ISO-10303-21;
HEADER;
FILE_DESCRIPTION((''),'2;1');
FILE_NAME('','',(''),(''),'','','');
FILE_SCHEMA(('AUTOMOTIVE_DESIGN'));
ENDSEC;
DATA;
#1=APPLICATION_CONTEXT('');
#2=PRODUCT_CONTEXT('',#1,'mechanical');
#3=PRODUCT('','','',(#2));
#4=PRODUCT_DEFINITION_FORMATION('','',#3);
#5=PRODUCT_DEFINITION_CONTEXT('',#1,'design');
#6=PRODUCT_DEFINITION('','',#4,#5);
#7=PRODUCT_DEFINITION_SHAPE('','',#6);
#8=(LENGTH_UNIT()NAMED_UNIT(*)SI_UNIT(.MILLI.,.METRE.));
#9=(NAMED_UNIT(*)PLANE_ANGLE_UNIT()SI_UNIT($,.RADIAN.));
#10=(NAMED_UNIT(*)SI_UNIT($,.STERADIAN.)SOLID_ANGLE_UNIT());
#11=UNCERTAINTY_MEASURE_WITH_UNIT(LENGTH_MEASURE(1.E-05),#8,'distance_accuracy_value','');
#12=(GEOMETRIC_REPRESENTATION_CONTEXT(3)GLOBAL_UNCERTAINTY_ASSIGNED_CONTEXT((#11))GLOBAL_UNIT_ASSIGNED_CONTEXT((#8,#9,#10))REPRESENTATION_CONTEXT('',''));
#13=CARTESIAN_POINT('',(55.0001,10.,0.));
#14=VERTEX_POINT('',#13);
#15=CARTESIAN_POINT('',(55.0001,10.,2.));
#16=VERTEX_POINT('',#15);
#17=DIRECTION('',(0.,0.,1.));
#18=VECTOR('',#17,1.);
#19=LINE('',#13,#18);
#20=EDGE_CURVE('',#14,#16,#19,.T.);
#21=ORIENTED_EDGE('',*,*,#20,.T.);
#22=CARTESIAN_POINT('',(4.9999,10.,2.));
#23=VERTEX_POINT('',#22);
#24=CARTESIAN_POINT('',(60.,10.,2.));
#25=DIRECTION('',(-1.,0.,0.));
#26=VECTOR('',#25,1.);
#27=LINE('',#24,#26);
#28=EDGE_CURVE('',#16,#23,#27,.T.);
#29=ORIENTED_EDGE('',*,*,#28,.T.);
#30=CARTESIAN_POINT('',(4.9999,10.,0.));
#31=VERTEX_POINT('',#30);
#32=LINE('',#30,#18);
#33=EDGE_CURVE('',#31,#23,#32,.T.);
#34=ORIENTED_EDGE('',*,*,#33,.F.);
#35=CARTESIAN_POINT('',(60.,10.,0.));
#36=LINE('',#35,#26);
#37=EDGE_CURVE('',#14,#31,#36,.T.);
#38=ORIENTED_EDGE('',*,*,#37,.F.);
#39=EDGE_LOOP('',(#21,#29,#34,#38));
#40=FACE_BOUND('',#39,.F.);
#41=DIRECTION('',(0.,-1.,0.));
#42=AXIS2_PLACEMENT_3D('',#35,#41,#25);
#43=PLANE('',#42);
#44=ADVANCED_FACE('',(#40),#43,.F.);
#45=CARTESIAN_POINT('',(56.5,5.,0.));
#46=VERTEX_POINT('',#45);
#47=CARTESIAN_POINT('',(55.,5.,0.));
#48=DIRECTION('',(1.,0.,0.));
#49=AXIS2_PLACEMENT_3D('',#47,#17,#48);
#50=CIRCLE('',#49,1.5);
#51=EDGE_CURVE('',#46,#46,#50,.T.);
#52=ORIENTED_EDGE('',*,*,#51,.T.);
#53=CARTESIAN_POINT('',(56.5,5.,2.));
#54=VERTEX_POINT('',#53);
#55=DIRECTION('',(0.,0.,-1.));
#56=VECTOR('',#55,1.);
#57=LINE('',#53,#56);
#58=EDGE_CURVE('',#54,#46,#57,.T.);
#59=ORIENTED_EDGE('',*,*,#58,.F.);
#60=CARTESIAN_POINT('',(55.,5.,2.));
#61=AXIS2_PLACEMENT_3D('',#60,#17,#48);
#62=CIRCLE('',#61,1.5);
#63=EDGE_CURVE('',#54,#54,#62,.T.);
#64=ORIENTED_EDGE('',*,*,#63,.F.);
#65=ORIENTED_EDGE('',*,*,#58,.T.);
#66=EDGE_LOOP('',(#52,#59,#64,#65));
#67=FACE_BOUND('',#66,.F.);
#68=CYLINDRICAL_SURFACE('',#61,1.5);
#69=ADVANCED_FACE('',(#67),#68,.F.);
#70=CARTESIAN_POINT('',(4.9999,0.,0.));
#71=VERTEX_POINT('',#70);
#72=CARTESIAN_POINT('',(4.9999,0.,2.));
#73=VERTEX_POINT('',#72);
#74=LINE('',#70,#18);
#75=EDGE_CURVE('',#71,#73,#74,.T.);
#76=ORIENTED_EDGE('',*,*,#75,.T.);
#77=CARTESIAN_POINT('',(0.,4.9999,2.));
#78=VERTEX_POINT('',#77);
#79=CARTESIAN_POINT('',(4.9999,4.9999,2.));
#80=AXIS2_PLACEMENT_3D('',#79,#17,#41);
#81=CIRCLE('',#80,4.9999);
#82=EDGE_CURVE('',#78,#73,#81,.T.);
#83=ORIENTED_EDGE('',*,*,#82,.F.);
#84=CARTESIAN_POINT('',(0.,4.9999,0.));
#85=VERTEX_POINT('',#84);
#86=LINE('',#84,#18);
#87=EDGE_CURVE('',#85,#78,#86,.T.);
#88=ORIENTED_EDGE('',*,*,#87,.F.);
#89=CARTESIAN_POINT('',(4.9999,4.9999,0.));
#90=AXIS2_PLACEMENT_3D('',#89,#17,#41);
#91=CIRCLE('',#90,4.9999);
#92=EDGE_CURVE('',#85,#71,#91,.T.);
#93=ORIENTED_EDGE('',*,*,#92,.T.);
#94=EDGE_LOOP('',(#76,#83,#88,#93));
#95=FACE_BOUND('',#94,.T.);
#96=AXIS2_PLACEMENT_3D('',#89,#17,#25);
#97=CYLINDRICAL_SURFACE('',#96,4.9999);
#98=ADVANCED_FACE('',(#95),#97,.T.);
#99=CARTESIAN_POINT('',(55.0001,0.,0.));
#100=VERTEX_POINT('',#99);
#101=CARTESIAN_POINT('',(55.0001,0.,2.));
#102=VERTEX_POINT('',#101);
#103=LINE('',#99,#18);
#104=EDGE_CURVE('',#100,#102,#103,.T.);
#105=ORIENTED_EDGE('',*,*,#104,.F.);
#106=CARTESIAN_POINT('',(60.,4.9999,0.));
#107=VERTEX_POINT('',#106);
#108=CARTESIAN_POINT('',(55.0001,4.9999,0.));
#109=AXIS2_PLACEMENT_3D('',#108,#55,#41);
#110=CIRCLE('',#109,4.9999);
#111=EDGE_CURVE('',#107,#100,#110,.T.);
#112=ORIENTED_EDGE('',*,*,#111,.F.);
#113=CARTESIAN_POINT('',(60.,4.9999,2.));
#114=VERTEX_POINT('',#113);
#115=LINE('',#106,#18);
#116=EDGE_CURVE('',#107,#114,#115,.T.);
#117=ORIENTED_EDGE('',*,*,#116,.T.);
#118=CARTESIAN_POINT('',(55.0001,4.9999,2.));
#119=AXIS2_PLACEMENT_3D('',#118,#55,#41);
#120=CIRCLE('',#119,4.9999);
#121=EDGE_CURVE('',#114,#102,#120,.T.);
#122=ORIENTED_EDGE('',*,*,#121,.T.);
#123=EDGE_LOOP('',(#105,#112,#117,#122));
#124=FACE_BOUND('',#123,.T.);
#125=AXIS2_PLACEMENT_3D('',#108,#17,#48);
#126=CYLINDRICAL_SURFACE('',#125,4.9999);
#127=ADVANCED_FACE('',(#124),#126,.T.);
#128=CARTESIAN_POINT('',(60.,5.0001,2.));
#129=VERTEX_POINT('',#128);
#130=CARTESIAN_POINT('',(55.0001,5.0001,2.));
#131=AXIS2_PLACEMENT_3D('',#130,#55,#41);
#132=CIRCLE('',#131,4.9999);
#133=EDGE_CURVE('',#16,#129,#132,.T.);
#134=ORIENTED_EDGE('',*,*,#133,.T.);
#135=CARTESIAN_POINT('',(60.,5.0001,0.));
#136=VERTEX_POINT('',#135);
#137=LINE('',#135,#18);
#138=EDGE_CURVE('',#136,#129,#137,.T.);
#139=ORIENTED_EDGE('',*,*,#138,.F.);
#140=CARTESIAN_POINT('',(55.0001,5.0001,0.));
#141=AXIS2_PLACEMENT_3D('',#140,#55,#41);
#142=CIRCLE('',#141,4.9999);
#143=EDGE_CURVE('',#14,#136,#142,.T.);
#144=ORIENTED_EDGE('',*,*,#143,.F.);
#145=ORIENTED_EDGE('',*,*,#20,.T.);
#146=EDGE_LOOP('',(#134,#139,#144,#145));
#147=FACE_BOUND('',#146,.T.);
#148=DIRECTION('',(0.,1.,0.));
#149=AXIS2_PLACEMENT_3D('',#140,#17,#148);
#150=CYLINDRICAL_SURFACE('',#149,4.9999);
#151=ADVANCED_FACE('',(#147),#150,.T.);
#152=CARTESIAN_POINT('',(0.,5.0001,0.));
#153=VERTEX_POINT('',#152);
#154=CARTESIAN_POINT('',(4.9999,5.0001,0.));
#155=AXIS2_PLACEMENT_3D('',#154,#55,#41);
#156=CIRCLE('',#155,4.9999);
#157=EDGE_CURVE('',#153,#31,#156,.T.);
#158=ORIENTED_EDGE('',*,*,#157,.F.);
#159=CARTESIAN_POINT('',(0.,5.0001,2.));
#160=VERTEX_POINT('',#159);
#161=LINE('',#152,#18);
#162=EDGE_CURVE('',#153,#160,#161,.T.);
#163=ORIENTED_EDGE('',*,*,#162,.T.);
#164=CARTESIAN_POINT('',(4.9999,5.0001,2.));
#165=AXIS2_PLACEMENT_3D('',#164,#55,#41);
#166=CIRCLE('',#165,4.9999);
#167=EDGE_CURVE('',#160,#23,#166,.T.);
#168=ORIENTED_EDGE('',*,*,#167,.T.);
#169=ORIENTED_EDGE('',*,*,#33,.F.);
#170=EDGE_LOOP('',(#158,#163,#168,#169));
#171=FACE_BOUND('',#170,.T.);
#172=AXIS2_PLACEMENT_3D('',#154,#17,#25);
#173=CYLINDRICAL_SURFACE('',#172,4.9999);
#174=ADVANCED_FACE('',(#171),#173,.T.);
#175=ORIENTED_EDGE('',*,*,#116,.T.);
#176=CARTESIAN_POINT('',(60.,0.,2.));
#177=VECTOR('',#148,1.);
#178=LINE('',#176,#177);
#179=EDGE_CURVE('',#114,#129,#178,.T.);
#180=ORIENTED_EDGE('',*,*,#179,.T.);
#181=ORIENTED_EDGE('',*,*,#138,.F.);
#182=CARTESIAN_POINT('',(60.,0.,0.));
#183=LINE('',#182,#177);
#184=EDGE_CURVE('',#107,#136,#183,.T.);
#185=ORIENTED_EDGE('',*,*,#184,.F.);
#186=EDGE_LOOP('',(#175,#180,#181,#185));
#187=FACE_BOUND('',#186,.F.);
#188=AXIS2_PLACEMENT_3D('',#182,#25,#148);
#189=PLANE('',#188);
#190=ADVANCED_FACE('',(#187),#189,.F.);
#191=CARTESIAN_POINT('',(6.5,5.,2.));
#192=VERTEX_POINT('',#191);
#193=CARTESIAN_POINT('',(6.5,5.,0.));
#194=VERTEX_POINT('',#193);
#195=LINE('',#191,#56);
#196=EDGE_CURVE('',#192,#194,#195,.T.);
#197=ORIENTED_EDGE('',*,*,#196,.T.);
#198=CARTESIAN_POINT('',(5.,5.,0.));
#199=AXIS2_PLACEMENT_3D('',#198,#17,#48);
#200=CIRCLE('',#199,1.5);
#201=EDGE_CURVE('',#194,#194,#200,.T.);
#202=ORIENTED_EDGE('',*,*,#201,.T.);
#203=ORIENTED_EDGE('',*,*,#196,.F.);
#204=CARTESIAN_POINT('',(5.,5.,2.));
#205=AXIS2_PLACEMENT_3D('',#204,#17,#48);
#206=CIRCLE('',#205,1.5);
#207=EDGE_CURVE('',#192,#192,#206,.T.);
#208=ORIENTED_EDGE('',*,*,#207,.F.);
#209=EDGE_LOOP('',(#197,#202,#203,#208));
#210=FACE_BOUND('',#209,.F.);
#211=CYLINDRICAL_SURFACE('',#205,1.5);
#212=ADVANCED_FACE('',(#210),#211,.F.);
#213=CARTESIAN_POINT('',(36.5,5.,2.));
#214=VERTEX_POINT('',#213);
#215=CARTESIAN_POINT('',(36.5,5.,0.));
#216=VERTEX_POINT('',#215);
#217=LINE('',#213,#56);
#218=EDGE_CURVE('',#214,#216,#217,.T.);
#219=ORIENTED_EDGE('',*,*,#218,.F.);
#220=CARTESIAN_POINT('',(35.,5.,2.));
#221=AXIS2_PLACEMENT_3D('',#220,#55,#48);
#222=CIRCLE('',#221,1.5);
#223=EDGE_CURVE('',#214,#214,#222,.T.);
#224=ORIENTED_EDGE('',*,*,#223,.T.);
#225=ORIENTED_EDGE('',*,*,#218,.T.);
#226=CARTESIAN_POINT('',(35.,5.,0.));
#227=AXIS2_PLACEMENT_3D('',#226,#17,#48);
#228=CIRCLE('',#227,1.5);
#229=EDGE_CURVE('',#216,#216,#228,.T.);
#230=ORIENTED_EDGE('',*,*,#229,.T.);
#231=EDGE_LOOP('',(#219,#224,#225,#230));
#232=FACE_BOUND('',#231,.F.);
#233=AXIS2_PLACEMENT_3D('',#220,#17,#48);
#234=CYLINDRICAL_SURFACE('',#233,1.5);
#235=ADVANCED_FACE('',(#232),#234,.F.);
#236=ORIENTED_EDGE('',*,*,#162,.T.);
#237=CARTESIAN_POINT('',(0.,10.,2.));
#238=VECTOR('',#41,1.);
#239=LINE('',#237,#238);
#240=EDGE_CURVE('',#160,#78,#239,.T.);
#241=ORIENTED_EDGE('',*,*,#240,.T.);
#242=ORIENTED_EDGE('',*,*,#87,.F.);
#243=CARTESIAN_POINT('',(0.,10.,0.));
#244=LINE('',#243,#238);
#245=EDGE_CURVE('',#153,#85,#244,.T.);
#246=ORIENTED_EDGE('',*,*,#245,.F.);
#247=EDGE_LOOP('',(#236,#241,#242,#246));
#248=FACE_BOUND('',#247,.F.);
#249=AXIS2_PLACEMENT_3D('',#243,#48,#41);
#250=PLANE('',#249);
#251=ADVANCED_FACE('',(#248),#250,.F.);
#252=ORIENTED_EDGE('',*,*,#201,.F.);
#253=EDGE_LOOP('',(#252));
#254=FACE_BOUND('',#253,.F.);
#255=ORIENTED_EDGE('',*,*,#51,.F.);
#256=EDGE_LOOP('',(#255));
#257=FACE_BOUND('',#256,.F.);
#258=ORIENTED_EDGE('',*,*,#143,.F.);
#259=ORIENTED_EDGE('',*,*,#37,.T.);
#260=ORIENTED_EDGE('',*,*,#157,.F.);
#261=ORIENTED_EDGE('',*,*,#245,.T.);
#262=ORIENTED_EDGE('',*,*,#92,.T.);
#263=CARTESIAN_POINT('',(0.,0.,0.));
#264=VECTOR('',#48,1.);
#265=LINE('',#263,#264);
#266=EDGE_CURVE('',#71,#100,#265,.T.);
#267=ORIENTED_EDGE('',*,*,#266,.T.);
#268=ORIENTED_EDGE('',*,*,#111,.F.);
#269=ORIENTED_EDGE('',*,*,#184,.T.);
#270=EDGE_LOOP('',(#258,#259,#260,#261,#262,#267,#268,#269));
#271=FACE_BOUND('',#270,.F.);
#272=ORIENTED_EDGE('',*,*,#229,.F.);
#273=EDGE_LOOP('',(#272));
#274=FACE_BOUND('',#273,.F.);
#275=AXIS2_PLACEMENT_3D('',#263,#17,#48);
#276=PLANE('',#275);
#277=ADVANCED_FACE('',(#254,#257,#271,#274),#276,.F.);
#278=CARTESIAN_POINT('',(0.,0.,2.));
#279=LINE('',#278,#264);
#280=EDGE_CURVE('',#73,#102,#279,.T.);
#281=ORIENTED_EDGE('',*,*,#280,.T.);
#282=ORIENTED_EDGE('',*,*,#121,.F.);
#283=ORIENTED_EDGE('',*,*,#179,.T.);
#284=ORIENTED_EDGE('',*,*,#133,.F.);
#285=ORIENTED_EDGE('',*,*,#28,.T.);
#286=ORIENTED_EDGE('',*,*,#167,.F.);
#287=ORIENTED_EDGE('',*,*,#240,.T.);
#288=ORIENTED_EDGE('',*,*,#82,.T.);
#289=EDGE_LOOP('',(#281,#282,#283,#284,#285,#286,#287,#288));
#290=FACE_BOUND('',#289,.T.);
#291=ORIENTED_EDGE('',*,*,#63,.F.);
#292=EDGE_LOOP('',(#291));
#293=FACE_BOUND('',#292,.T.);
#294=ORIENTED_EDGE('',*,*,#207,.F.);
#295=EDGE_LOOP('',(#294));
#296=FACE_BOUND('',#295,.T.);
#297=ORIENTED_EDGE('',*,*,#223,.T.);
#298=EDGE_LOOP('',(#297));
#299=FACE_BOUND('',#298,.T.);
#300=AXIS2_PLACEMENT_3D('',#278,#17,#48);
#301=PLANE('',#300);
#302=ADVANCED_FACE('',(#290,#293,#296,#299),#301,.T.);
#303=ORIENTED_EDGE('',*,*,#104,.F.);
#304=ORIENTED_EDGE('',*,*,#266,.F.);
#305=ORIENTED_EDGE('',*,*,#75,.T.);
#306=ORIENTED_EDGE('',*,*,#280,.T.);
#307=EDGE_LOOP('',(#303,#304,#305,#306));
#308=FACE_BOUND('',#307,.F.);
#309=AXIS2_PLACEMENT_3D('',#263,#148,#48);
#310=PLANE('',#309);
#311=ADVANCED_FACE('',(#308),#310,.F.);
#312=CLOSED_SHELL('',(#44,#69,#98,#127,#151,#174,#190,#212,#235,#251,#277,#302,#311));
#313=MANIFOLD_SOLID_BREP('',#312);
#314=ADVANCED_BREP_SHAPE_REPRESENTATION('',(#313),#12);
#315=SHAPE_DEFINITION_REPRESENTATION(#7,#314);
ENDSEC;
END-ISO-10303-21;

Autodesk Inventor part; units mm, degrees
ref_plane "YZ Plane" through (0, 0, 0) normal (1, 0, 0) x (0, 1, 0)
ref_plane "XZ Plane" through (0, 0, 0) normal (0, 1, 0) x (-1, 0, 0)
ref_plane "XY Plane" through (0, 0, 0) normal (0, 0, 1) x (1, 0, 0)
sketch "Sketch1" plane through (0, 0, 0) normal (0, 0, 1) x (1, 0, 0)
  line L0 (0, 0) -> (60, 0)
  line L1 (60, 0) -> (60, 10)
  line L2 (60, 10) -> (0, 10)
  line L3 (0, 10) -> (0, 0)
  dimension "d0" = 60
  dimension "d1" = 10
extrude "Extrusion1" add sketch "Sketch1" along normal blind 2
fillet "Fillet1" radius 5 4 edges at (0, 10, 1) (0, 0, 1) (60, 10, 1) (60, 0, 1)
sketch "Sketch2" plane through (0, 0, 2) normal (0, 0, 1) x (1, 0, 0)
  arc A0 (5, 10) -> (5, 0) centre (5, 5) ccw projected
  circle A1 centre (5, 5) radius 1.5
  arc A2 (55, 0) -> (55, 10) centre (55, 5) ccw projected
  circle A3 centre (55, 5) radius 1.5
  line L0 (55, 10) -> (5, 10) projected
  line L1 (30, 10) -> (30, 5)
  line L2 (30, 5) -> (35, 5)
  circle A4 centre (35, 5) radius 1.5
  point P0 (0, 0)
  dimension "d5" = 3
  dimension "d6" = 3
  dimension "d9" = 5
  dimension "d10" = 3
extrude "Extrusion2" cut sketch "Sketch2" against normal blind 2
properties part number "Side Support 2"
